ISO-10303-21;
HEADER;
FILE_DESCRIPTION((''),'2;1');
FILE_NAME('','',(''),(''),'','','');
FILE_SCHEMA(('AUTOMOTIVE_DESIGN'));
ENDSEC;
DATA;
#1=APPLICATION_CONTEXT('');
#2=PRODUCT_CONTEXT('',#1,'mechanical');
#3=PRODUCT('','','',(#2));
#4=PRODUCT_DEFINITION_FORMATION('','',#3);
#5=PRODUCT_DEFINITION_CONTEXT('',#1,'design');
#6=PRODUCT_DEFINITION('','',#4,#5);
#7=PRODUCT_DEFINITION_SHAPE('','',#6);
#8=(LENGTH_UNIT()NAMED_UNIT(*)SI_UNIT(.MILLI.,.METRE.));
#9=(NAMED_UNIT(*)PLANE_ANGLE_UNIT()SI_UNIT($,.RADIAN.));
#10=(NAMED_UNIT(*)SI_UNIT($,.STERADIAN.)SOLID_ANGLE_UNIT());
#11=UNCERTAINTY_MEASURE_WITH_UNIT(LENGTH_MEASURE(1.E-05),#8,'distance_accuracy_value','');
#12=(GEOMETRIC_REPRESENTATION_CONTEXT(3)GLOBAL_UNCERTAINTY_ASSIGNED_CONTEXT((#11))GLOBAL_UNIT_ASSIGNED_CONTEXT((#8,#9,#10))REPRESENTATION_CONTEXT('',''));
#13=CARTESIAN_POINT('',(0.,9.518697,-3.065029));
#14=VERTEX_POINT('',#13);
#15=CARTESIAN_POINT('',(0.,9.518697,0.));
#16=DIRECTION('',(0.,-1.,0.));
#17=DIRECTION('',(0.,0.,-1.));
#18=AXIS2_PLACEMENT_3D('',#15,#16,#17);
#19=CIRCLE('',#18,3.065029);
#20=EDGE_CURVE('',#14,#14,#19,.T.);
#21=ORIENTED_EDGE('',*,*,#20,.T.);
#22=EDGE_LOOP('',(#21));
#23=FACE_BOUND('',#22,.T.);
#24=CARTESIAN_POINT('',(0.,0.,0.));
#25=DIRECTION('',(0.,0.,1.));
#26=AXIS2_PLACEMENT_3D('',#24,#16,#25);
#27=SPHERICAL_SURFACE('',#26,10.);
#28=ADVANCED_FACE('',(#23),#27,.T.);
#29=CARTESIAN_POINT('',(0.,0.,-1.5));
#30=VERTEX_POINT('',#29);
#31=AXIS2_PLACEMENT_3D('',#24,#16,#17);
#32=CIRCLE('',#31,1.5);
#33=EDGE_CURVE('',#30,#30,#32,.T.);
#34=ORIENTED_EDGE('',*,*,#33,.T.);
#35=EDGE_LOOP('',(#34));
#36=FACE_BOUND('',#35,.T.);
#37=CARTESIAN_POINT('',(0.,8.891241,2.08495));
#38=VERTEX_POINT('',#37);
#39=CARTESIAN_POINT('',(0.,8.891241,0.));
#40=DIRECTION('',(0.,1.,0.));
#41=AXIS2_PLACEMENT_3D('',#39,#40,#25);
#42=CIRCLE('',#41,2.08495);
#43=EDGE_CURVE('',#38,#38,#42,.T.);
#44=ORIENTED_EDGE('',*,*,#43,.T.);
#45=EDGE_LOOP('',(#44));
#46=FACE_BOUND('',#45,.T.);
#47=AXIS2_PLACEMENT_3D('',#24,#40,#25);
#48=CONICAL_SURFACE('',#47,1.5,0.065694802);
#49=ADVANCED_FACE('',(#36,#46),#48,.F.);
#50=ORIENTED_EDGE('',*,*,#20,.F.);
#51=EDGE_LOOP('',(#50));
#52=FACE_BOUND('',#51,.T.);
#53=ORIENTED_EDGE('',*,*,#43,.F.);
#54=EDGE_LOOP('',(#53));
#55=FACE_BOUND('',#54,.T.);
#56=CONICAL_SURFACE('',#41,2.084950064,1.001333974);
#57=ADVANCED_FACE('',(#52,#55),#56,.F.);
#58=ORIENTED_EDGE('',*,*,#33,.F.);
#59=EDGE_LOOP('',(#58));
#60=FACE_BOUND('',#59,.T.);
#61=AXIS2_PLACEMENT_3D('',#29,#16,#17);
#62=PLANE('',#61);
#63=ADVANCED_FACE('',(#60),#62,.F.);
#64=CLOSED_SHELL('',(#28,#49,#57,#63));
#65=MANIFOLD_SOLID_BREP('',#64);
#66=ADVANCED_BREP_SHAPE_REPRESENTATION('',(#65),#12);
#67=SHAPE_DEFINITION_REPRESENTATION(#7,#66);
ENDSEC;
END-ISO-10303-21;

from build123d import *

# Parameters (mm, degrees)
CHAMFER1_SIZE = 0.878417015


with BuildPart() as part:
    # Sketch1 → Revolve1 (revolve)
    with BuildSketch(Plane(origin=(0, 0, 0), x_dir=(0, 0, -1), z_dir=(1, 0, 0))):
        with BuildLine():
            Line((0, 0), (0, 10))
            ThreePointArc((0, 10), (10, 0), (0, -10))
            Line((0, -10), (0, 0))
        make_face()
    revolve(axis=Axis((0, 0, 0), (0, 1, 0)))

    # Sketch2 → Cut-Revolve1 (revolve, cut)
    with BuildSketch(Plane(origin=(0, 0, 0), x_dir=(0, 0, -1), z_dir=(1, 0, 0)), mode=Mode.PRIVATE) as cut_revolve1_sk:
        Polygon((0, 0), (0, 10.64), (2.2, 10.64), (1.5, 0), align=None)
    revolve(cut_revolve1_sk.sketch.rotate(Axis((0, 0, 0), (0, 1, 0)), 180), axis=Axis((0, 0, 0), (0, 1, 0)), mode=Mode.SUBTRACT)

    # Chamfer1
    # the kernel refuses this chamfer: 1, 0.878417015 mm, written as the material it takes off along each edge
    with BuildSketch(Plane(origin=(0, 9.767763137, 0), x_dir=(0, 0, 1), z_dir=(-1, 0, 0))) as chamfer1_piece_1:
        with BuildLine():
            Line((3.065028643, -0.249065777), (2.142615996 - CHAMFER1_SIZE * 0.0656475573893, -CHAMFER1_SIZE * 0.997842872317))
            Line((2.142615996 - CHAMFER1_SIZE * 0.0656475573893, -CHAMFER1_SIZE * 0.997842872317), (2.142615996, 0))
            ThreePointArc((2.142615996, 0), (2.619777215, -0.117023924), (3.065028643, -0.249065777))
        make_face()
    revolve(axis=Axis((0, 9.767763137, 0), (0, 1, 0)), revolution_arc=180, mode=Mode.SUBTRACT)
    with BuildSketch(Plane(origin=(0, 9.767763137, 0), x_dir=(0, 0, -1), z_dir=(1, 0, 0))) as chamfer1_piece_2:
        with BuildLine():
            Line((3.065028643, -0.249065777), (2.142615996 - CHAMFER1_SIZE * 0.0656475573893, -CHAMFER1_SIZE * 0.997842872317))
            Line((2.142615996 - CHAMFER1_SIZE * 0.0656475573893, -CHAMFER1_SIZE * 0.997842872317), (2.142615996, 0))
            ThreePointArc((2.142615996, 0), (2.619777215, -0.117023924), (3.065028643, -0.249065777))
        make_face()
    revolve(axis=Axis((0, 9.767763137, 0), (0, 1, 0)), revolution_arc=180, mode=Mode.SUBTRACT)


solid = part.part
